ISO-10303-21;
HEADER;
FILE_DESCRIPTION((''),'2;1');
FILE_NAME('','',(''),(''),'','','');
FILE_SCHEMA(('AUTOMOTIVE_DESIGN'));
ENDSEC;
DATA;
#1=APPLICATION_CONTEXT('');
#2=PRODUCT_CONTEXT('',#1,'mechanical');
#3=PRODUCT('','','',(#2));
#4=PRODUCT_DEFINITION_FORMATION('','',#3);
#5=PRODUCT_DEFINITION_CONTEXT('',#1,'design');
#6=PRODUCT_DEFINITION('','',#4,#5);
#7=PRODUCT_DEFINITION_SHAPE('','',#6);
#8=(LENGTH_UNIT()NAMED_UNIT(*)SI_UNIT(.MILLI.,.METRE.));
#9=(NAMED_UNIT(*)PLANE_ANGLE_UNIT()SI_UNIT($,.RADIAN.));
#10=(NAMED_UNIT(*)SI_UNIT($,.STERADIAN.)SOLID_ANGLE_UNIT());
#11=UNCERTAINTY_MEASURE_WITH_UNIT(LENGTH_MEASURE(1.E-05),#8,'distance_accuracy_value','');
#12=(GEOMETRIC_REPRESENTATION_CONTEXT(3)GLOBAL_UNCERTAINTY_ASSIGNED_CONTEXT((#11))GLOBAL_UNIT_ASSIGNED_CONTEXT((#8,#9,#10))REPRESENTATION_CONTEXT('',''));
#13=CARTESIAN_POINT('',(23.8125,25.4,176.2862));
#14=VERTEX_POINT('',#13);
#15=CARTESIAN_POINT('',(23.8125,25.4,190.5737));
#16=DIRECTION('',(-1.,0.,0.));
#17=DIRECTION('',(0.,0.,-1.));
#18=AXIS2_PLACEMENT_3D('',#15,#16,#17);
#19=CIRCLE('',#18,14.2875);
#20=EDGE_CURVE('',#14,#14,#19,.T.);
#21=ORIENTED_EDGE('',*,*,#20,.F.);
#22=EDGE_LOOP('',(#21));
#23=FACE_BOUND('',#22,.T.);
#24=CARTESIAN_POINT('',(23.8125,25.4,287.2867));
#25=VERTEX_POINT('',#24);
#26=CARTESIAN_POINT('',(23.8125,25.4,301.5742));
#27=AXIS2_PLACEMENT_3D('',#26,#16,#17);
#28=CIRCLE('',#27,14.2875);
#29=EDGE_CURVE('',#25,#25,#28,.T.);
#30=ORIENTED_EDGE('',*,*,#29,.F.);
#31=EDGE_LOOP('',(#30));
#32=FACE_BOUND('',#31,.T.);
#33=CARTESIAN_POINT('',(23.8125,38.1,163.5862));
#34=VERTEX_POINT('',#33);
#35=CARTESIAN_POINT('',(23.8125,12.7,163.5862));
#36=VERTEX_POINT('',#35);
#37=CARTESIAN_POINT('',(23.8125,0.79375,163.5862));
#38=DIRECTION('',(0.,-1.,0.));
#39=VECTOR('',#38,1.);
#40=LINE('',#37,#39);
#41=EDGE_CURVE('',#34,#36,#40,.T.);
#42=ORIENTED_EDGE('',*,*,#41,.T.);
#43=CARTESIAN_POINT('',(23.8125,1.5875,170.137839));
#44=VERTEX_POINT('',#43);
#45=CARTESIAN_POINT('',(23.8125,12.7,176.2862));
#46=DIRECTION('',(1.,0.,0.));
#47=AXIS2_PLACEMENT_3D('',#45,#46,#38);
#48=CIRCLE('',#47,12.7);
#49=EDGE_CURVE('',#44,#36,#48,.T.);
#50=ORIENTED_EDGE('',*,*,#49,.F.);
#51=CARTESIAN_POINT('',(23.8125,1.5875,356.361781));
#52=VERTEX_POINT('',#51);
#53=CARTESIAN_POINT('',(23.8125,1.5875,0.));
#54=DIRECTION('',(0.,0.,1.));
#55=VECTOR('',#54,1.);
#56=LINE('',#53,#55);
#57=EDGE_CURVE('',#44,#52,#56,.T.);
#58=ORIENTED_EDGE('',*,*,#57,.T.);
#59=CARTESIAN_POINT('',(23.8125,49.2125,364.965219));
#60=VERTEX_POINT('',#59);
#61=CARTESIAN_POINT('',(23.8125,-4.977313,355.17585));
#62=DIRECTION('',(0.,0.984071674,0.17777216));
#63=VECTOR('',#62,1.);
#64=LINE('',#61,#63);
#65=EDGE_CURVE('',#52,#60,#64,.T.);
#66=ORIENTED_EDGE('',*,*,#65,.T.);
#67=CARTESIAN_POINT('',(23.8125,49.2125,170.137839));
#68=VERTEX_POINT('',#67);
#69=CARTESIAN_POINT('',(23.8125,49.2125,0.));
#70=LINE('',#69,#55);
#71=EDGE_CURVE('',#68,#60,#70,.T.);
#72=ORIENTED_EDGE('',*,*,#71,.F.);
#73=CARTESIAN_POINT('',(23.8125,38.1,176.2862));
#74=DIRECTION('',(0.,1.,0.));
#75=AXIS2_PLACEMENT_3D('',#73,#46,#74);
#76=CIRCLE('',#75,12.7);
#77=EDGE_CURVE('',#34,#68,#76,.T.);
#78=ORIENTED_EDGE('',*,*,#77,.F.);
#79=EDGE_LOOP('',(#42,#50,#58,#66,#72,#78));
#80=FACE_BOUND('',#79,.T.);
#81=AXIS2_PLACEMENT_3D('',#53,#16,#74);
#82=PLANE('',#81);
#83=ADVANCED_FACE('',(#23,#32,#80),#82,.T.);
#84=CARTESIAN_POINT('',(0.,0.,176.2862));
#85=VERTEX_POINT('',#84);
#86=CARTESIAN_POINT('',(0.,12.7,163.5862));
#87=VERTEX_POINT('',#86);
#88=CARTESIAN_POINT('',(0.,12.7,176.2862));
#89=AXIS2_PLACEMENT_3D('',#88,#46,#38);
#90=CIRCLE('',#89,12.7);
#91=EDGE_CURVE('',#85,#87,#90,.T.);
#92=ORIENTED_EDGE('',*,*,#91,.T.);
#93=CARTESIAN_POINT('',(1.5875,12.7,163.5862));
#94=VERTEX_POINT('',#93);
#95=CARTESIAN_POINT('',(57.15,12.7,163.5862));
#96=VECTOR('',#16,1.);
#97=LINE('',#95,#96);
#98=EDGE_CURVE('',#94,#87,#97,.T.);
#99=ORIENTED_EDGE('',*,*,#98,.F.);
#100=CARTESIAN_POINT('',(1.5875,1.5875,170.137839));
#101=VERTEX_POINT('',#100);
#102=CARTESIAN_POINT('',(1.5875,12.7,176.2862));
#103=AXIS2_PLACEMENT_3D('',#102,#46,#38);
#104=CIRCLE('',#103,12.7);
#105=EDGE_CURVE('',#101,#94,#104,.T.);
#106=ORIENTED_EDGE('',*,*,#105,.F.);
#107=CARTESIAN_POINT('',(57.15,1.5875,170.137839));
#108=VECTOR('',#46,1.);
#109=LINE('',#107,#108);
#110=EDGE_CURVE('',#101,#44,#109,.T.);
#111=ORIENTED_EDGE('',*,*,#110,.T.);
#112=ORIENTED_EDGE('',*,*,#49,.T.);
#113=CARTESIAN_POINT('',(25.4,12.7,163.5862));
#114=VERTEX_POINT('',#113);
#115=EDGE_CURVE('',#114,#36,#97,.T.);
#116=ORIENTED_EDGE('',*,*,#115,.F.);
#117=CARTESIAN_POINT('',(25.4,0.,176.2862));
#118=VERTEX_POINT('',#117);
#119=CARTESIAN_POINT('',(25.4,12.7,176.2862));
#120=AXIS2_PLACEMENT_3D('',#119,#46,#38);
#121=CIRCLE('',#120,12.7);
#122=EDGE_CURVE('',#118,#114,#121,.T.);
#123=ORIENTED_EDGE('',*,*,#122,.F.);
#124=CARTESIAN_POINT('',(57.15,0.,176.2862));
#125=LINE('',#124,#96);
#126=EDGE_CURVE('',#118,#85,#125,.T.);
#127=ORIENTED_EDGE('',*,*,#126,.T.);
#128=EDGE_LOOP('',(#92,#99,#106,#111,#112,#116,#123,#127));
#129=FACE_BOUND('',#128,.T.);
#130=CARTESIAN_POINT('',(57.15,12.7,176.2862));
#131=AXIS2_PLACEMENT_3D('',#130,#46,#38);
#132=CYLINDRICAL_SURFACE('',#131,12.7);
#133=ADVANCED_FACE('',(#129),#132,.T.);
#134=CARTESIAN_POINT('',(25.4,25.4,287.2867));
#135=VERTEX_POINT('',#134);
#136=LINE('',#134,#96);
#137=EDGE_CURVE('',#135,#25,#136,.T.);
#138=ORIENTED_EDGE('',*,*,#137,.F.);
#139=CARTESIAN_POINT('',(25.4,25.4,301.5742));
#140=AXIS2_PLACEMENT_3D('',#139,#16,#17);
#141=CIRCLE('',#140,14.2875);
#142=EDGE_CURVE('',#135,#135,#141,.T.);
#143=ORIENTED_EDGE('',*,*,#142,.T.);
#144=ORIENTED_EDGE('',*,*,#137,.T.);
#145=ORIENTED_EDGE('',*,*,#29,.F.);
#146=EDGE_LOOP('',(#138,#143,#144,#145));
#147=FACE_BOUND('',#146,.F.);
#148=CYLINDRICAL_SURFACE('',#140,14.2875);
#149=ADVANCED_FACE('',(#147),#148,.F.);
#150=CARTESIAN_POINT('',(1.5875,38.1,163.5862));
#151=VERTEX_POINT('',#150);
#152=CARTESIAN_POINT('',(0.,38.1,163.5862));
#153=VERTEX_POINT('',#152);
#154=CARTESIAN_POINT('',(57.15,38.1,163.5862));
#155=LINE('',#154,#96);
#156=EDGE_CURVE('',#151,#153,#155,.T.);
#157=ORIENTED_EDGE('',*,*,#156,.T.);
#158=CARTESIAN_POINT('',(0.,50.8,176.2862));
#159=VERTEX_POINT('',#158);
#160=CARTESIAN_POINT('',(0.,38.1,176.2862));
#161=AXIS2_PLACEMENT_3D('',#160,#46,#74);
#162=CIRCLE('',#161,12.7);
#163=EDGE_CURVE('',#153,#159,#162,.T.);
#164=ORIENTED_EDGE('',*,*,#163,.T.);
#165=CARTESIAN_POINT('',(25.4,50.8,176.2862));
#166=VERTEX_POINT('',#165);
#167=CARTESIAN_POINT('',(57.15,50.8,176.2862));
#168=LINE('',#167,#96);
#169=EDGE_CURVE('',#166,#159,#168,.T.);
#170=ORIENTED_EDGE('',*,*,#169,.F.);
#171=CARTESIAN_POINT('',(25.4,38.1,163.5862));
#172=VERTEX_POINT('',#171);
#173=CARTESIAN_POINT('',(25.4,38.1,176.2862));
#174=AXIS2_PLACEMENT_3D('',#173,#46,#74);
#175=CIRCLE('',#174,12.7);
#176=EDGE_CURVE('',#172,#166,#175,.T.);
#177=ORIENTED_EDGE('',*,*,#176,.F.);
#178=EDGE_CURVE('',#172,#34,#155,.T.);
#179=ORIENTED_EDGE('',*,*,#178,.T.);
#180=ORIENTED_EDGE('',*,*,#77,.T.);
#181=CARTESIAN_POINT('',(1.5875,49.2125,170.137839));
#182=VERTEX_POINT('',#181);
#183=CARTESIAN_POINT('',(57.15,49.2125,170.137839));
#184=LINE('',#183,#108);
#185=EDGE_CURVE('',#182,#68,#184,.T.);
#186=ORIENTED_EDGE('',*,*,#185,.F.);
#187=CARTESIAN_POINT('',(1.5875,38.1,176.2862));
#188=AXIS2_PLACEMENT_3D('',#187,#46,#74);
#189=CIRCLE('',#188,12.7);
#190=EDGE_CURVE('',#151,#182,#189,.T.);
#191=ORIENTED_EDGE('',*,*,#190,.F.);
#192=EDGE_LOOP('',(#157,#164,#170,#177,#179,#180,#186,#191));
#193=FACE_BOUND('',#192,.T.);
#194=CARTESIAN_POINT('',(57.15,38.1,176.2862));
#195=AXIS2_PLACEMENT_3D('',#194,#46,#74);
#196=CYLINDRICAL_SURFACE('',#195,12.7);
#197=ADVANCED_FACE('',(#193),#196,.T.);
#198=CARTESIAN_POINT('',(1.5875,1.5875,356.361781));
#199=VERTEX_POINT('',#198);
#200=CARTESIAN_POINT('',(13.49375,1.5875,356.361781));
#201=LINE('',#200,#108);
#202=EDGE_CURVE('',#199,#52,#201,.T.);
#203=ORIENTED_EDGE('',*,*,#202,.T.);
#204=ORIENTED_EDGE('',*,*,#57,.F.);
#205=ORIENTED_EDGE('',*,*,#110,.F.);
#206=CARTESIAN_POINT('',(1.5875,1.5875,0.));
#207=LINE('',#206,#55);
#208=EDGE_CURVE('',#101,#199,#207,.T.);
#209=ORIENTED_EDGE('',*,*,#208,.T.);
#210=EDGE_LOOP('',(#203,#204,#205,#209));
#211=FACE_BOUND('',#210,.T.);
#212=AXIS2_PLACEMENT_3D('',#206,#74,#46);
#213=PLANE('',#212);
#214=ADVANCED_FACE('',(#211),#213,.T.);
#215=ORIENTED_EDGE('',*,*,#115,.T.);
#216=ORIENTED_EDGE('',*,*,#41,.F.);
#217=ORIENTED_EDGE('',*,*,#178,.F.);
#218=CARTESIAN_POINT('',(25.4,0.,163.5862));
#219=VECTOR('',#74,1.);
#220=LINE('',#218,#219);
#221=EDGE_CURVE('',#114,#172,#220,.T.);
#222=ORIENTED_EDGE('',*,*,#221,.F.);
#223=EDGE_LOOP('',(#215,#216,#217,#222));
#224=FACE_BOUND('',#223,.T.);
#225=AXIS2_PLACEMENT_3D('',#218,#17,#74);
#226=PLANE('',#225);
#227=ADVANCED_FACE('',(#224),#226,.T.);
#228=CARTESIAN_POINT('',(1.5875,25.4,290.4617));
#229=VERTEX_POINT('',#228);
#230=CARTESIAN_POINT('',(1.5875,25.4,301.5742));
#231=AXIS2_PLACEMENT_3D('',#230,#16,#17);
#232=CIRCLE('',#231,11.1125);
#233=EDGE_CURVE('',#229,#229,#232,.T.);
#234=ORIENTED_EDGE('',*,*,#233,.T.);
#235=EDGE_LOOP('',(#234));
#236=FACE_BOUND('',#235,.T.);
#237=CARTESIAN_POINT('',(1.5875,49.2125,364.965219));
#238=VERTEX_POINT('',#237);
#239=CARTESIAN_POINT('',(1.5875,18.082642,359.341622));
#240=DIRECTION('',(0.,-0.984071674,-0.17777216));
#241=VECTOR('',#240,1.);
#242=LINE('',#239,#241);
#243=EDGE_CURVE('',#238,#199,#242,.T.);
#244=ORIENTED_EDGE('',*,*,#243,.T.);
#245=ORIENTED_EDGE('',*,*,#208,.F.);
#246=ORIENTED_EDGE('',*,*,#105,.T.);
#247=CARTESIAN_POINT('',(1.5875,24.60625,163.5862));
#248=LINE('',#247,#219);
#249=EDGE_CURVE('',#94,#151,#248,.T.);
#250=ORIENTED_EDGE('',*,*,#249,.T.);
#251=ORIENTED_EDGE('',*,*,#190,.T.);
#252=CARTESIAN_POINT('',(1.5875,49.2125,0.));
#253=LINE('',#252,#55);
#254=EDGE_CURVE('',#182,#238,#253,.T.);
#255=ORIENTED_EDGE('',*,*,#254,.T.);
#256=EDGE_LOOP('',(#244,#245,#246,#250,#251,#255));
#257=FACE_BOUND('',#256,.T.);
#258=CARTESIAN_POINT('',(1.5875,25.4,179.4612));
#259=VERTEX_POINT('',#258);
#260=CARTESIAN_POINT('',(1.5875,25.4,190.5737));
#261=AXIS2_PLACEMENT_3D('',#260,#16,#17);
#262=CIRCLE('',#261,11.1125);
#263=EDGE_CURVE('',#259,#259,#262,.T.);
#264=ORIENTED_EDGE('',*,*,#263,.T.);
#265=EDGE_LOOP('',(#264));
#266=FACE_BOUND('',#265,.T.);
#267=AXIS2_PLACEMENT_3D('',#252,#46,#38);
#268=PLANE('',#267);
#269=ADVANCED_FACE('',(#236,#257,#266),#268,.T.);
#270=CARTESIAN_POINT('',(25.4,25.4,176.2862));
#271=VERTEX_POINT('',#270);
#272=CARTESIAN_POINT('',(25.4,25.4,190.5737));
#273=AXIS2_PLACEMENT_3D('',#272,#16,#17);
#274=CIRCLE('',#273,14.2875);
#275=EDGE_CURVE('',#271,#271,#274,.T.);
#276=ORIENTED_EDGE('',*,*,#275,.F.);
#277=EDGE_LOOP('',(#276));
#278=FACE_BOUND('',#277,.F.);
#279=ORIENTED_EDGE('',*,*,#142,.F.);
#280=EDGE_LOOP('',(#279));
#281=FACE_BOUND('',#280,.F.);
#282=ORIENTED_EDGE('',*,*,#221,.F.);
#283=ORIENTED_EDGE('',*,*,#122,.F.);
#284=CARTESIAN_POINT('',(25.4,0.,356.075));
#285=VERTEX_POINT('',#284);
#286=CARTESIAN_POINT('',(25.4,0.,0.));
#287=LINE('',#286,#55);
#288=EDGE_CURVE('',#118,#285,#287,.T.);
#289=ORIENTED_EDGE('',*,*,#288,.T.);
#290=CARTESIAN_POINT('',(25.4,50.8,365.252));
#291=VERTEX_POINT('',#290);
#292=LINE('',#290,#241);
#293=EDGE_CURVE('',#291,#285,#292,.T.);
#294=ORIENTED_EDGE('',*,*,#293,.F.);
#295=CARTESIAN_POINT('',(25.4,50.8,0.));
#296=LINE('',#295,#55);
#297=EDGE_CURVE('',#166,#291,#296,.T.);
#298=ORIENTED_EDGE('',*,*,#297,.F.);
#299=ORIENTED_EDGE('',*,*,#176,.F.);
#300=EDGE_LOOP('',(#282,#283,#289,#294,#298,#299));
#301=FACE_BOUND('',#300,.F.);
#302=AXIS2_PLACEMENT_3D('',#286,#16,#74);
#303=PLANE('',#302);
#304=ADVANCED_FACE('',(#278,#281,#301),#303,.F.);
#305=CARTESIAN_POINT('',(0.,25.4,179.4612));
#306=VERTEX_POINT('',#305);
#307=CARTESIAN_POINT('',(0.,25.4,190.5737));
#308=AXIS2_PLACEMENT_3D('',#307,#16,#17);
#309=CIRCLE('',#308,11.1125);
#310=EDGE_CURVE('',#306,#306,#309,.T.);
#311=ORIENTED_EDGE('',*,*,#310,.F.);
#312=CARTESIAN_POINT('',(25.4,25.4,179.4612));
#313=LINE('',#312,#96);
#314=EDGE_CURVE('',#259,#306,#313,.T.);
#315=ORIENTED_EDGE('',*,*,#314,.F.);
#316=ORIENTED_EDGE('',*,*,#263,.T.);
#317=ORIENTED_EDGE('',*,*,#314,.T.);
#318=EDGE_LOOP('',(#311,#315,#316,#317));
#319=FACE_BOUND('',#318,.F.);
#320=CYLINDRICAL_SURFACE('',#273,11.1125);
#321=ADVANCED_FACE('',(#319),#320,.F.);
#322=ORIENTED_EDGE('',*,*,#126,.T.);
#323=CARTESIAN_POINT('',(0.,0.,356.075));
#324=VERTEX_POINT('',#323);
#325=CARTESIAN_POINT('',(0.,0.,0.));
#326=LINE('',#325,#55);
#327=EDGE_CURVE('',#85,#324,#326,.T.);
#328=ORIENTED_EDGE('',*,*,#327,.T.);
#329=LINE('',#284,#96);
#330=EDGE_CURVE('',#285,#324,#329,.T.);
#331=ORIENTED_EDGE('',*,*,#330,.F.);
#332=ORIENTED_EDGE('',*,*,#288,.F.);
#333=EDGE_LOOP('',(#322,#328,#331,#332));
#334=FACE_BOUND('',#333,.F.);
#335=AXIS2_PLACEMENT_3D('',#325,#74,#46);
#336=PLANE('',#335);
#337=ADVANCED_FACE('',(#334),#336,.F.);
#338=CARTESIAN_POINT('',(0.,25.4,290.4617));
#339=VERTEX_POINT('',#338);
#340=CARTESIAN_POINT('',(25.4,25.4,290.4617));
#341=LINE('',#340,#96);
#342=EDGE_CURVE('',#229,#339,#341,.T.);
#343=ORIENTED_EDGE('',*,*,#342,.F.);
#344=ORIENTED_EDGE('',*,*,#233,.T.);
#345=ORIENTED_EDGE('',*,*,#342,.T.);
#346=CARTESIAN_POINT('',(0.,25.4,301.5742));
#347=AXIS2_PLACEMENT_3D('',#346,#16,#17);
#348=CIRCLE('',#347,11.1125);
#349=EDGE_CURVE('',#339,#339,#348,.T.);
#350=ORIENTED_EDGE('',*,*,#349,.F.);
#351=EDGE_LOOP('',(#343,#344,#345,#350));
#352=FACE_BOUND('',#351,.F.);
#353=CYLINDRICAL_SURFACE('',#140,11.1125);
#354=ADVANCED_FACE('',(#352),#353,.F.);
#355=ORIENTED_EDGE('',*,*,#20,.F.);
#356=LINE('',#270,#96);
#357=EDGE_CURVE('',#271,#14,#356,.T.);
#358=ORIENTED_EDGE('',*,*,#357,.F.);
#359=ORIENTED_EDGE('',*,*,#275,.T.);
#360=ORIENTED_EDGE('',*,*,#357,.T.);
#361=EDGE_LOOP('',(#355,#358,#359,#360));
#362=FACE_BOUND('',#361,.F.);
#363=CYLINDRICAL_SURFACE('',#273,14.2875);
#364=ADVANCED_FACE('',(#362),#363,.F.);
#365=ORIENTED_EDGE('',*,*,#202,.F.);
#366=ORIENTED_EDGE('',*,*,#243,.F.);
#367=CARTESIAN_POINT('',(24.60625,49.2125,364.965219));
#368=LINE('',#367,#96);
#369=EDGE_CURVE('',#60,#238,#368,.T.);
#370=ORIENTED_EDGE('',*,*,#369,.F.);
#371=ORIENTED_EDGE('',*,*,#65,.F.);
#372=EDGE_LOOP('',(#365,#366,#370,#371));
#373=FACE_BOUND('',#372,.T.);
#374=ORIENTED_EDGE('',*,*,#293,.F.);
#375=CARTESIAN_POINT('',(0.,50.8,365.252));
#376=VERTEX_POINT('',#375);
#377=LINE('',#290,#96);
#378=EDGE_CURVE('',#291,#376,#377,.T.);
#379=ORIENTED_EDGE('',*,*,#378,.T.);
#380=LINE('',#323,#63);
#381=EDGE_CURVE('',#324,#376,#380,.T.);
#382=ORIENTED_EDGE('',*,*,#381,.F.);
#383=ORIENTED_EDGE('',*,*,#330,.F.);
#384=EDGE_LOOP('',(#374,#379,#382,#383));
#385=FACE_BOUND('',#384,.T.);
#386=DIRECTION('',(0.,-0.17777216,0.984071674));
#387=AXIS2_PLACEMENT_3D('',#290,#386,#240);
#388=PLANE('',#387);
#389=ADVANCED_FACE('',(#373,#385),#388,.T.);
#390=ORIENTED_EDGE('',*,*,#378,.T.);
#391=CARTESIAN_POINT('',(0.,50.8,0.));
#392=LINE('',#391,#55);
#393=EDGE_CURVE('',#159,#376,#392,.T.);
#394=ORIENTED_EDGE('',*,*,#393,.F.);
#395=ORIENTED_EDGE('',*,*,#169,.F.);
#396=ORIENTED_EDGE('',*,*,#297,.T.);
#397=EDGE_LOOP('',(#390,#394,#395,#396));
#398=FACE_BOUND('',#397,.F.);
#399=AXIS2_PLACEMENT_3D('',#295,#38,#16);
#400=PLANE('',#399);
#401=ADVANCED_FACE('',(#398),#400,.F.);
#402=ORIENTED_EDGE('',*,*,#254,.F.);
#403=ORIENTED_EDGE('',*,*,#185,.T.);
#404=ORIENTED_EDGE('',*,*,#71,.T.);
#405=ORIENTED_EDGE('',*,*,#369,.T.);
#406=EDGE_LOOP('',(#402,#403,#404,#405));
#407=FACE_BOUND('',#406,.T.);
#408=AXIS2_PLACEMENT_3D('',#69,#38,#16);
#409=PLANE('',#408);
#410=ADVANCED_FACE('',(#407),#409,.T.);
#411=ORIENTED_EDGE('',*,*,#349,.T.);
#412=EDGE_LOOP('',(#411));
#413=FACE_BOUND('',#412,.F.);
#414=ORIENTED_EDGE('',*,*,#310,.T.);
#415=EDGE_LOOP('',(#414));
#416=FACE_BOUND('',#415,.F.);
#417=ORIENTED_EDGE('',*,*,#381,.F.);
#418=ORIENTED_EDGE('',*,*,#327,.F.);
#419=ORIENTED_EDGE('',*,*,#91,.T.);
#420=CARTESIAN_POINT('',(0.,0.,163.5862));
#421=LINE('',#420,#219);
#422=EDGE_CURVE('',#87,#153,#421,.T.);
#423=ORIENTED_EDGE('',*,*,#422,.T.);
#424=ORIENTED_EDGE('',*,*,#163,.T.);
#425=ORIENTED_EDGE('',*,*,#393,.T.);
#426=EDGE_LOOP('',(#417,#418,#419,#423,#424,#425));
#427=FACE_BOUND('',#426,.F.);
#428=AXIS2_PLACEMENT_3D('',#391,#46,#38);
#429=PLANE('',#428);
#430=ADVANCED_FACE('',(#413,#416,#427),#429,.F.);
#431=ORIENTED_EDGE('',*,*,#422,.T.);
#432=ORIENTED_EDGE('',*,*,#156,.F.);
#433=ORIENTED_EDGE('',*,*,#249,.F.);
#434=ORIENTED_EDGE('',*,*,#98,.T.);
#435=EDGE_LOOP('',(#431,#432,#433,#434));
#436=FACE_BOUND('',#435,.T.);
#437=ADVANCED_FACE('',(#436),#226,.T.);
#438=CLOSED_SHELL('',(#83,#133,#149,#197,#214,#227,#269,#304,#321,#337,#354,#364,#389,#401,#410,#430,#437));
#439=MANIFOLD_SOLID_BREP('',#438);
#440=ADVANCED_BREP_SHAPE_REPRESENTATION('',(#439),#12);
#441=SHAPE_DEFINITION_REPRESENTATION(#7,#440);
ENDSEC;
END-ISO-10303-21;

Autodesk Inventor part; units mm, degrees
ref_plane "YZ Plane" through (0, 0, 0) normal (1, 0, 0) x (0, 1, 0)
ref_plane "XZ Plane" through (0, 0, 0) normal (0, 1, 0) x (-1, 0, 0)
ref_plane "XY Plane" through (0, 0, 0) normal (0, 0, 1) x (1, 0, 0)
sketch "Sketch1" plane through (0, 0, 0) normal (0, 0, 1) x (1, 0, 0)
  line L0 (0, 0) -> (25.4, 0)
  line L1 (25.4, 0) -> (25.4, 50.8)
  line L2 (25.4, 50.8) -> (0, 50.8)
  line L3 (0, 50.8) -> (0, 0)
  line L4 (1.5875, 1.5875) -> (23.8125, 1.5875)
  line L5 (23.8125, 1.5875) -> (23.8125, 49.2125)
  line L6 (23.8125, 49.2125) -> (1.5875, 49.2125)
  line L7 (1.5875, 49.2125) -> (1.5875, 1.5875)
  dimension "d0" = 25.4
  dimension "d1" = 50.8
  dimension "d2" = 1.5875
extrude "Extrusion1" add sketch "Sketch1" along normal blind 365.252
sketch "Sketch2" plane through (25.4, 0, 0) normal (1, 0, 0) x (0, 0, -1)
  line L0 (0, 50.8) -> (-365.252, 50.8) projected
  line L1 (-365.252, 50.8) -> (-356.075, 0)
  line L2 (-356.075, 0) -> (-365.252, 0)
  line L3 (0, 1.5875) -> (-365.252, 1.5875) projected
  line L4 (-365.252, 50.8) -> (-365.252, 0) projected
  line L5 (-365.252, 0) -> (-365.252, 50.8)
  point P0 (0, 0)
  dimension "d5" = 10.24
sketch "Sketch3" plane through (25.4, 0, 0) normal (1, 0, 0) x (0, 0, -1)
  line L0 (0, 0) -> (0, 50.8) projected
  line L1 (0, 50.8) -> (-365.252, 50.8) projected
  line L2 (0, 0) -> (-365.252, 0) projected
  line L3 (-365.252, 0) -> (-365.252, 50.8) projected
  point P0 (-50.8, 25.4)
  point P1 (-190.5737, 25.4)
  point P2 (-356.075, 0)
  point P3 (-301.5742, 25.4)
  dimension "d9" = 50.8
  dimension "d10" = 25.4
  dimension "d19" = 25.4
  dimension "d21" = 25.4
  dimension "d25" = 63.6778
  dimension "d28" = 174.6783
hole "Hole1" at (25.4, 25.4, 50.8) at (25.4, 25.4, 190.5737) at (25.4, 25.4, 301.5742) direction (-1, 0, 0) diameter 22.225 depth 25.4 tip angle 118
sketch "Sketch4" plane through (25.4, 0, 0) normal (1, 0, 0) x (0, 0, -1)
  line L0 (0, 50.8) -> (-365.252, 50.8) projected
  line L1 (-163.5862, 50.8) -> (0, 50.8)
  line L2 (0, 50.8) -> (0, 0)
  line L3 (0, 0) -> (-163.5862, 0)
  line L4 (-163.5862, 0) -> (-163.5862, 50.8)
  circle A0 centre (-190.5737, 25.4) radius 11.1125 projected
  dimension "d22" = 26.9875
extrude "Extrusion3" cut sketch "Sketch4" against normal blind 25.4 contours L2 L3 L4 L0
extrude "Extrusion4" cut sketch "Sketch2" against normal blind 25.4
fillet "Fillet1" radius 12.7 2 edges at (12.7, 50.8, 163.5862) (12.7, 0, 163.5862)
sketch "Sketch5" plane through (25.4, 12.7, 163.5862) normal (1, 0, 0) x (0, 0, -1)
  circle A0 centre (-26.9875, 12.7) radius 11.1125 projected
  circle A1 centre (-137.988, 12.7) radius 11.1125 projected
  point P0 (163.5862, -12.7)
  dimension "d30" = 0
  dimension "d31" = 0
hole "Hole2" at (25.4, 25.4, 190.5737) at (25.4, 25.4, 301.5742) direction (-1, 0, 0) diameter 28.575 depth 1.5875 tip angle 118
properties part number "ARM_030_TopIntakeSide" material "Aluminum 6061"
